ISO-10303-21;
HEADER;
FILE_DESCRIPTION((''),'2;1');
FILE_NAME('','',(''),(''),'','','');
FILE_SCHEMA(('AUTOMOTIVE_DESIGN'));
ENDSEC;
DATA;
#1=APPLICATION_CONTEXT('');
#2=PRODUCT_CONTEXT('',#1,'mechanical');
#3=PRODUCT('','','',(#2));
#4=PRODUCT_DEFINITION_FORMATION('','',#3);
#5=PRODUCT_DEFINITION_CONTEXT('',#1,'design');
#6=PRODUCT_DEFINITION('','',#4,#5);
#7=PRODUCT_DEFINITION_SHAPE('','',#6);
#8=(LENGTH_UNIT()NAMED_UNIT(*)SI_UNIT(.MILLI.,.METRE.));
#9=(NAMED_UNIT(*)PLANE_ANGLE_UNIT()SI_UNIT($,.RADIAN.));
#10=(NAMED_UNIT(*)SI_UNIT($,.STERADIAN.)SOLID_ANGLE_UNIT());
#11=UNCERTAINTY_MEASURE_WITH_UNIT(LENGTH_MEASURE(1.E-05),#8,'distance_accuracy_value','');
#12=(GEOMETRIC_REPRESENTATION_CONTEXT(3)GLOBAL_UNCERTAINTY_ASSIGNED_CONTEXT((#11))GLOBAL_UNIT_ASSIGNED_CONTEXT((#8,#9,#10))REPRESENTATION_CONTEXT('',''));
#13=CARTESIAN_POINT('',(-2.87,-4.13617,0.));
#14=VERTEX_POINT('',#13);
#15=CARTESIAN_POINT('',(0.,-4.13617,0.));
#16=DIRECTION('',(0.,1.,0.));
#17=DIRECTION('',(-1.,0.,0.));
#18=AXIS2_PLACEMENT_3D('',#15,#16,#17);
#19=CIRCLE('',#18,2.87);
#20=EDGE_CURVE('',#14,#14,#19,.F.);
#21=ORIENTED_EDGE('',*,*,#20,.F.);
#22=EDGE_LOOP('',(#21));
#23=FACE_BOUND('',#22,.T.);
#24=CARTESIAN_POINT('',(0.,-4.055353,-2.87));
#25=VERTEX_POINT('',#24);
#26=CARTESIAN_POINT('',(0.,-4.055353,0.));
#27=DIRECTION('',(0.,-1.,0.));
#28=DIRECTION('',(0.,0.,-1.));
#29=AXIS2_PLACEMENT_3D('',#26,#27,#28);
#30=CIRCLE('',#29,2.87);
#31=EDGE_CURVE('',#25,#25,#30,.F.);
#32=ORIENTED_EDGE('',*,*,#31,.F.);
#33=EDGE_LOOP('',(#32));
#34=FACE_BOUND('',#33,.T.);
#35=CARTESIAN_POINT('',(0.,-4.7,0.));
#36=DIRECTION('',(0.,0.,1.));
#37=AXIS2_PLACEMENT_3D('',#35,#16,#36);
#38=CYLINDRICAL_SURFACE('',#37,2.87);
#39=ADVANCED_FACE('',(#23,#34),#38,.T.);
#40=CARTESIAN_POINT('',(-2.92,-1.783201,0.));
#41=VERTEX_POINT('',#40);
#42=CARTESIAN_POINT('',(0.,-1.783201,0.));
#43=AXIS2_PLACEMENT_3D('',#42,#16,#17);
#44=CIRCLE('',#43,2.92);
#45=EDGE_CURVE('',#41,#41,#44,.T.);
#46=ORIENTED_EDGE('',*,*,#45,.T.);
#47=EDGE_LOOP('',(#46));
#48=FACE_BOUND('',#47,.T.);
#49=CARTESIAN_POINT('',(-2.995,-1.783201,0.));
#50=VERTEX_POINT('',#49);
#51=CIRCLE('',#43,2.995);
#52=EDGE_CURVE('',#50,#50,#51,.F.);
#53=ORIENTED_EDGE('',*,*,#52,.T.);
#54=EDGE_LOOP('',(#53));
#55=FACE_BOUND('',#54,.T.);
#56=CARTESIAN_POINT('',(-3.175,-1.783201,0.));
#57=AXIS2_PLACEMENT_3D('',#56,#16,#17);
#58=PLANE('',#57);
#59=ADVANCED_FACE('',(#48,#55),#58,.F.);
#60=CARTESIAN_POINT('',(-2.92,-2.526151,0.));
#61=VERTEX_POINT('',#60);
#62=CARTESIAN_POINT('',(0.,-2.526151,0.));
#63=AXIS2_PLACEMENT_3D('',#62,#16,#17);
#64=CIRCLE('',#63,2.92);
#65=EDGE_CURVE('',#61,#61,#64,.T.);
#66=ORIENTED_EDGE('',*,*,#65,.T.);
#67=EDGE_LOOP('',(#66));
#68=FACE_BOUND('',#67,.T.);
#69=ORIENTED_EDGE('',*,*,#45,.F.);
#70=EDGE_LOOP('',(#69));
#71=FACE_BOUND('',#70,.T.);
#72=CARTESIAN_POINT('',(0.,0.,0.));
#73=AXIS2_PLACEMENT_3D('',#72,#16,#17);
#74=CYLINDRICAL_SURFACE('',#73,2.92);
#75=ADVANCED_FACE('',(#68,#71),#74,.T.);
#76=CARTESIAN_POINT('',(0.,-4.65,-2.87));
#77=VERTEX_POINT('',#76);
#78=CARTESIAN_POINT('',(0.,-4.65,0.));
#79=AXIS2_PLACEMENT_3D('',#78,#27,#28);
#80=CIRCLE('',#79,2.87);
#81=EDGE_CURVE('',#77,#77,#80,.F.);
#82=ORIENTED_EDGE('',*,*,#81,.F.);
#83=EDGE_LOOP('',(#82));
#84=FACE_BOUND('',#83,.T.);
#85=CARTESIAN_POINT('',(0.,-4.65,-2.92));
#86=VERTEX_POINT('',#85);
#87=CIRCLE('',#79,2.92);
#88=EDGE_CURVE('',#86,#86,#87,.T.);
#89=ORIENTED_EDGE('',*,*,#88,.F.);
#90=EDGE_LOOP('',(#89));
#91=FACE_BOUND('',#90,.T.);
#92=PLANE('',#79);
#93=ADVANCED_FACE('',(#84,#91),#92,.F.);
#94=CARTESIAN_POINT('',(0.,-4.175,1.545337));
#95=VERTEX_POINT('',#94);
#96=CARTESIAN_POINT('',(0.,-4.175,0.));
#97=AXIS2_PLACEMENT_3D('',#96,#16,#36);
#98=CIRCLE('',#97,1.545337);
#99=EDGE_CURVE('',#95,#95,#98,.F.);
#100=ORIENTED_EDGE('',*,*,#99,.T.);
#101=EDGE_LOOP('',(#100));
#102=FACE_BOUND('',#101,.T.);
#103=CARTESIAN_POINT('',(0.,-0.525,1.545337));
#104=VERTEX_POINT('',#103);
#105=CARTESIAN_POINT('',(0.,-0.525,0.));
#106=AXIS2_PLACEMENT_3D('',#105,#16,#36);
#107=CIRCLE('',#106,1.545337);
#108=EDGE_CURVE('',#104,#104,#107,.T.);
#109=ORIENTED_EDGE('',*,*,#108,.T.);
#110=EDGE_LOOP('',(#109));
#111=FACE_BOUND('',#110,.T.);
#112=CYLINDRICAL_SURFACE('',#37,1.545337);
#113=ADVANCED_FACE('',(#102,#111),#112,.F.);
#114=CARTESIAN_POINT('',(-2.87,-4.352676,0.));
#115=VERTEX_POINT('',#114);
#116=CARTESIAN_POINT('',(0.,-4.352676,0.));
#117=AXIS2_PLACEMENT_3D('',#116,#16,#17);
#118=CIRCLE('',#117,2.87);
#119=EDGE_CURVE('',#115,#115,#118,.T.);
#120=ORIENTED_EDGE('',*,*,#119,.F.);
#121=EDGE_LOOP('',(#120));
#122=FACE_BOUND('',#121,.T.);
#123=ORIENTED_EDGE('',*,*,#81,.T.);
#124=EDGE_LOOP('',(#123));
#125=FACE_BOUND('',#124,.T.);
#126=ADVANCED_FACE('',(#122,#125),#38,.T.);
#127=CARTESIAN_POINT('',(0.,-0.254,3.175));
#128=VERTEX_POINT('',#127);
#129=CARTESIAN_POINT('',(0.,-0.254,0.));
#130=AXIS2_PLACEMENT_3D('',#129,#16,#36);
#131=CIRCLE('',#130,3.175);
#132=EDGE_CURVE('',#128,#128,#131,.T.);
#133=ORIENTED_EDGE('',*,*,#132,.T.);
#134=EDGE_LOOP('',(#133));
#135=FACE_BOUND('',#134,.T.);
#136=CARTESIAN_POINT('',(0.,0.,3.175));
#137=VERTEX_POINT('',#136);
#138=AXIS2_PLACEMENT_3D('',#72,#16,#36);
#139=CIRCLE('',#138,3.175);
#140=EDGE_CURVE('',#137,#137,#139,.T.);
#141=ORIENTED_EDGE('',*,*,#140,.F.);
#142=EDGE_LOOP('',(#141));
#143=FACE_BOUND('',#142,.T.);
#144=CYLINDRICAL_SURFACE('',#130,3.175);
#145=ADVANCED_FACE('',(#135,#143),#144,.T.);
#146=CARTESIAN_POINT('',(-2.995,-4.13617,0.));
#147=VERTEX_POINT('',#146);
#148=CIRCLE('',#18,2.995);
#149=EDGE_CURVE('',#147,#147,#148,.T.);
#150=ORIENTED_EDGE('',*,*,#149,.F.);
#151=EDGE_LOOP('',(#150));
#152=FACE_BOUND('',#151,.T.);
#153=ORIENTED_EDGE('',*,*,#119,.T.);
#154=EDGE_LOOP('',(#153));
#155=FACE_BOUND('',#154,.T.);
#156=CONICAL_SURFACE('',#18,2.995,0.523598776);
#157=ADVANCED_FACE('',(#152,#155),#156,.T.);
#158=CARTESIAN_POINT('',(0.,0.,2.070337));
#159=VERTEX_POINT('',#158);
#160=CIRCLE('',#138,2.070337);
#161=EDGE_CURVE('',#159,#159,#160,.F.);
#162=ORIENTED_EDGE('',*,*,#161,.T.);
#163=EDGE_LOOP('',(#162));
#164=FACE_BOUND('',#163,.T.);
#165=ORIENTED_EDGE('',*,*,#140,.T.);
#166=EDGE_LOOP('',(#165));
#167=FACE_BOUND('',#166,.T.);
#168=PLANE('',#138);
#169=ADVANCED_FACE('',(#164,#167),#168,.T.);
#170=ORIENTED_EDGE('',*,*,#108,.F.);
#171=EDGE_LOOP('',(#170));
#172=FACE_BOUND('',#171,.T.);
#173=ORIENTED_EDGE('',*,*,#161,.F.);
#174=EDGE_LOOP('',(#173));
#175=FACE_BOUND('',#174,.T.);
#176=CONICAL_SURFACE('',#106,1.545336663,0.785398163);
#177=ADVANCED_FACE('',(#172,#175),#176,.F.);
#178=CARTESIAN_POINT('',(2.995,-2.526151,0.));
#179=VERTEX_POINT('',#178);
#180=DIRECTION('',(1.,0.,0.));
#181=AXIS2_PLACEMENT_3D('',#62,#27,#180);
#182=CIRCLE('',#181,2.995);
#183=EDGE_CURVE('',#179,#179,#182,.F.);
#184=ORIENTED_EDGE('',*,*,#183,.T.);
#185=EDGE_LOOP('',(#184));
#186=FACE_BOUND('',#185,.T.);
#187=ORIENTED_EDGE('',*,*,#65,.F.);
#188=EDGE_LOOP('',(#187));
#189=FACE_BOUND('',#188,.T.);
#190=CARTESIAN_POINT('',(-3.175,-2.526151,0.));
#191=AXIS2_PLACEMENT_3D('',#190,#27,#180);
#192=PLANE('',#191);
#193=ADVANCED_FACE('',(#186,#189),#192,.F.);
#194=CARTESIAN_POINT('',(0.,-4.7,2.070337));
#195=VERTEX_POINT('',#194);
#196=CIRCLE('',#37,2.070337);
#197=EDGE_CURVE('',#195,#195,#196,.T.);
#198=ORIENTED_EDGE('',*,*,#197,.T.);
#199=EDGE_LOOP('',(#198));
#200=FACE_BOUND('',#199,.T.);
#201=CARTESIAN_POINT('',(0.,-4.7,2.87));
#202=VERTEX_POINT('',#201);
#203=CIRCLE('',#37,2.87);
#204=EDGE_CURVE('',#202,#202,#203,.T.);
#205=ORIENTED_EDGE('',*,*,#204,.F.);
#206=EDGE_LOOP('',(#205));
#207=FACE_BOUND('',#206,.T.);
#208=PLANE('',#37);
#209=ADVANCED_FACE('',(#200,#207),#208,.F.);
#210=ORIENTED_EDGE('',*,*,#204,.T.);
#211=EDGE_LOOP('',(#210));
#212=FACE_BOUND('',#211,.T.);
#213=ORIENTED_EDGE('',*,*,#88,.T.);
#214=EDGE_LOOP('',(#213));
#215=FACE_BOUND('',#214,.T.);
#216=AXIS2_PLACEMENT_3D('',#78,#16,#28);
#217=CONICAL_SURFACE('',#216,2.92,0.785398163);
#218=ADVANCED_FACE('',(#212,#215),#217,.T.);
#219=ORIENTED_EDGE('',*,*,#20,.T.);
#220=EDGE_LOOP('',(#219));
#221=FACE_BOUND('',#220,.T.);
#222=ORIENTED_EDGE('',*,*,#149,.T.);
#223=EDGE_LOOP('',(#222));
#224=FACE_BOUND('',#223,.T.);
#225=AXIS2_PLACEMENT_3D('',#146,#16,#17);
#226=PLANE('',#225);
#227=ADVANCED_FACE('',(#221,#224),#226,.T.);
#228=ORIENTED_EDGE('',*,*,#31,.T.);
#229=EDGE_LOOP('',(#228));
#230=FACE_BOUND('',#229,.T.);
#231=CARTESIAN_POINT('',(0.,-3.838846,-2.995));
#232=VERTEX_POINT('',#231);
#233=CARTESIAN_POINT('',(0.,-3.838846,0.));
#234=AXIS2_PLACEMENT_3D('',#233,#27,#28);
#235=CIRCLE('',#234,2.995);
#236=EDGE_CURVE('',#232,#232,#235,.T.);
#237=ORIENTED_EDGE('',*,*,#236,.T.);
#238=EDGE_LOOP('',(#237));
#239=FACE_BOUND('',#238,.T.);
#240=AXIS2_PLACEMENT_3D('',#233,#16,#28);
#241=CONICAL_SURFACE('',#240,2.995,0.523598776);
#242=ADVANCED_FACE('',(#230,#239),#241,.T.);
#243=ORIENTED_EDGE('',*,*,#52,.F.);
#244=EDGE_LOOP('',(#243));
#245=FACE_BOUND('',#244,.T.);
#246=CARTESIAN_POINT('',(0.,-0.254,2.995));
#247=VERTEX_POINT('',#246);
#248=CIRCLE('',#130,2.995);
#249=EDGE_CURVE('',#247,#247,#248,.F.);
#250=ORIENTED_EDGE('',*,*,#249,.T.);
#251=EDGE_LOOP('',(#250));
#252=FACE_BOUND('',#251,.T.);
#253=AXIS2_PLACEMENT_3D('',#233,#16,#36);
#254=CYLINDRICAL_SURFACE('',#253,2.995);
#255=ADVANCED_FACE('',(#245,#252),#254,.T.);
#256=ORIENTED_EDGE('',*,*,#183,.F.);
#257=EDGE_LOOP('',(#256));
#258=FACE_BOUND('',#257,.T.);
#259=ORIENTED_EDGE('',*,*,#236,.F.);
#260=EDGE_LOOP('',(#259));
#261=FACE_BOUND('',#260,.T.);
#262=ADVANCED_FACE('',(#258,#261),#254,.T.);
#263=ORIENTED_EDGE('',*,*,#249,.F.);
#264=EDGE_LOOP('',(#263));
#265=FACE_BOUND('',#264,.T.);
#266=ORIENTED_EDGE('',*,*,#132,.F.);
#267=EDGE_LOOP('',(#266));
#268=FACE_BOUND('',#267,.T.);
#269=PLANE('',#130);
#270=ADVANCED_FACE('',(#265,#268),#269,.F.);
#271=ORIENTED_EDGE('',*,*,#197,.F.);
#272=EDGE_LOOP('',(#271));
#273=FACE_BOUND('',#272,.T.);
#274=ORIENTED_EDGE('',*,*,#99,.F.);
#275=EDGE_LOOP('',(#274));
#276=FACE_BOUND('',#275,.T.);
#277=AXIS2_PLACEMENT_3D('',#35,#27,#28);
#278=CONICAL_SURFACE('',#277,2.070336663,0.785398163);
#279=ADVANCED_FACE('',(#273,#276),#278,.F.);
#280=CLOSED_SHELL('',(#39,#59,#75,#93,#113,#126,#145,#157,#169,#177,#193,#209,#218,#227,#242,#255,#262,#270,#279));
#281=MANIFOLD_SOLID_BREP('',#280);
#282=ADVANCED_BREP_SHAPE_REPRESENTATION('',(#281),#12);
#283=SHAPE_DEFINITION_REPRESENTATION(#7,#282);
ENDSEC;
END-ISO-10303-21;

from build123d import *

# Parameters (mm, degrees)
SKETCH1_R      = 2.87
EXTRUDE1_DEPTH = 4.7
SKETCH1_4_R    = 2.995
EXTRUDE2_DEPTH = 3.838846
SKETCH1_3_R    = 3.175
EXTRUDE3_DEPTH = 0.254
SKETCH2_R      = 2.995
EXTRUDE4_DEPTH = 0.216506
EXTRUDE4_TAPER = 30
SKETCH8_R      = 1.545336663
EXTRUDE6_DEPTH = 4.7
CHAMFER1_SIZE  = 0.525
SKETCH11_W     = 0.255
SKETCH11_H     = 0.74295


# Read off the part's stored shape, not the designer's step: Extrude5
with BuildPart() as part:
    # Sketch1 → Extrude1 (new body)
    with BuildSketch(Plane(origin=(0, 0, 0), x_dir=(1, 0, 0), z_dir=(0, 1, 0))):
        with Locations(Location((0, 0, 0), (0, 0, 270))):
            Circle(SKETCH1_R)
    extrude(amount=-EXTRUDE1_DEPTH)

    # Sketch1<4> → Extrude2 (add)
    with BuildSketch(Plane(origin=(0, 0, 0), x_dir=(1, 0, 0), z_dir=(0, 1, 0))):
        with Locations(Location((0, 0, 0), (0, 0, 270))):
            Circle(SKETCH1_4_R)
    extrude(amount=-EXTRUDE2_DEPTH)

    # Sketch1<3> → Extrude3 (add)
    with BuildSketch(Plane(origin=(0, 0, 0), x_dir=(1, 0, 0), z_dir=(0, 1, 0))):
        with Locations(Location((0, 0, 0), (0, 0, 270))):
            Circle(SKETCH1_3_R)
    extrude(amount=-EXTRUDE3_DEPTH)

    # Sketch2 → Extrude4 (add)
    with BuildSketch(Plane.XZ.offset(3.838846189)):
        with Locations(Location((0, 0, 0), (0, 0, 90))):
            Circle(SKETCH2_R)
    extrude(amount=EXTRUDE4_DEPTH, taper=EXTRUDE4_TAPER)

    # Extrude5 outline → Extrude5 (revolve)
    with BuildSketch(Plane.XY):
        Polygon((2.87, -4.65), (2.87, -4.7), (2.92, -4.65), align=None)
    revolve(axis=Axis((0, 0, 0), (0, 1, 0)))

    # Sketch5 → Revolve1 (revolve)
    with BuildSketch(Plane.XY):
        Polygon((-2.87, -4.35267627), (-2.995, -4.136169919), (-2.87, -4.136169919), align=None)
    revolve(axis=Axis((0, 0, 0), (0, -1, 0)))

    # Sketch8 → Extrude6 (cut)
    with BuildSketch(Plane(origin=(0, 0, 0), x_dir=(1, 0, 0), z_dir=(0, 1, 0))):
        with Locations(Location((0, 0, 0), (0, 0, 270))):
            Circle(SKETCH8_R)
    extrude(amount=-EXTRUDE6_DEPTH, mode=Mode.SUBTRACT)

    # Chamfer1
    chamfer1_edges = [part.edges().sort_by_distance(p)[0] for p in [
        (0, -4.7, -1.545336663),
        (0, 0, -1.545336663),
    ]]
    chamfer(chamfer1_edges, length=CHAMFER1_SIZE)

    # Sketch11 → Cut-Revolve1 (revolve, cut)
    with BuildSketch(Plane.XY):
        with Locations((-3.0475, -2.15467627)):
            Rectangle(SKETCH11_W, SKETCH11_H)
    revolve(axis=Axis((0, 0, 0), (0, -1, 0)), mode=Mode.SUBTRACT)


solid = part.part
